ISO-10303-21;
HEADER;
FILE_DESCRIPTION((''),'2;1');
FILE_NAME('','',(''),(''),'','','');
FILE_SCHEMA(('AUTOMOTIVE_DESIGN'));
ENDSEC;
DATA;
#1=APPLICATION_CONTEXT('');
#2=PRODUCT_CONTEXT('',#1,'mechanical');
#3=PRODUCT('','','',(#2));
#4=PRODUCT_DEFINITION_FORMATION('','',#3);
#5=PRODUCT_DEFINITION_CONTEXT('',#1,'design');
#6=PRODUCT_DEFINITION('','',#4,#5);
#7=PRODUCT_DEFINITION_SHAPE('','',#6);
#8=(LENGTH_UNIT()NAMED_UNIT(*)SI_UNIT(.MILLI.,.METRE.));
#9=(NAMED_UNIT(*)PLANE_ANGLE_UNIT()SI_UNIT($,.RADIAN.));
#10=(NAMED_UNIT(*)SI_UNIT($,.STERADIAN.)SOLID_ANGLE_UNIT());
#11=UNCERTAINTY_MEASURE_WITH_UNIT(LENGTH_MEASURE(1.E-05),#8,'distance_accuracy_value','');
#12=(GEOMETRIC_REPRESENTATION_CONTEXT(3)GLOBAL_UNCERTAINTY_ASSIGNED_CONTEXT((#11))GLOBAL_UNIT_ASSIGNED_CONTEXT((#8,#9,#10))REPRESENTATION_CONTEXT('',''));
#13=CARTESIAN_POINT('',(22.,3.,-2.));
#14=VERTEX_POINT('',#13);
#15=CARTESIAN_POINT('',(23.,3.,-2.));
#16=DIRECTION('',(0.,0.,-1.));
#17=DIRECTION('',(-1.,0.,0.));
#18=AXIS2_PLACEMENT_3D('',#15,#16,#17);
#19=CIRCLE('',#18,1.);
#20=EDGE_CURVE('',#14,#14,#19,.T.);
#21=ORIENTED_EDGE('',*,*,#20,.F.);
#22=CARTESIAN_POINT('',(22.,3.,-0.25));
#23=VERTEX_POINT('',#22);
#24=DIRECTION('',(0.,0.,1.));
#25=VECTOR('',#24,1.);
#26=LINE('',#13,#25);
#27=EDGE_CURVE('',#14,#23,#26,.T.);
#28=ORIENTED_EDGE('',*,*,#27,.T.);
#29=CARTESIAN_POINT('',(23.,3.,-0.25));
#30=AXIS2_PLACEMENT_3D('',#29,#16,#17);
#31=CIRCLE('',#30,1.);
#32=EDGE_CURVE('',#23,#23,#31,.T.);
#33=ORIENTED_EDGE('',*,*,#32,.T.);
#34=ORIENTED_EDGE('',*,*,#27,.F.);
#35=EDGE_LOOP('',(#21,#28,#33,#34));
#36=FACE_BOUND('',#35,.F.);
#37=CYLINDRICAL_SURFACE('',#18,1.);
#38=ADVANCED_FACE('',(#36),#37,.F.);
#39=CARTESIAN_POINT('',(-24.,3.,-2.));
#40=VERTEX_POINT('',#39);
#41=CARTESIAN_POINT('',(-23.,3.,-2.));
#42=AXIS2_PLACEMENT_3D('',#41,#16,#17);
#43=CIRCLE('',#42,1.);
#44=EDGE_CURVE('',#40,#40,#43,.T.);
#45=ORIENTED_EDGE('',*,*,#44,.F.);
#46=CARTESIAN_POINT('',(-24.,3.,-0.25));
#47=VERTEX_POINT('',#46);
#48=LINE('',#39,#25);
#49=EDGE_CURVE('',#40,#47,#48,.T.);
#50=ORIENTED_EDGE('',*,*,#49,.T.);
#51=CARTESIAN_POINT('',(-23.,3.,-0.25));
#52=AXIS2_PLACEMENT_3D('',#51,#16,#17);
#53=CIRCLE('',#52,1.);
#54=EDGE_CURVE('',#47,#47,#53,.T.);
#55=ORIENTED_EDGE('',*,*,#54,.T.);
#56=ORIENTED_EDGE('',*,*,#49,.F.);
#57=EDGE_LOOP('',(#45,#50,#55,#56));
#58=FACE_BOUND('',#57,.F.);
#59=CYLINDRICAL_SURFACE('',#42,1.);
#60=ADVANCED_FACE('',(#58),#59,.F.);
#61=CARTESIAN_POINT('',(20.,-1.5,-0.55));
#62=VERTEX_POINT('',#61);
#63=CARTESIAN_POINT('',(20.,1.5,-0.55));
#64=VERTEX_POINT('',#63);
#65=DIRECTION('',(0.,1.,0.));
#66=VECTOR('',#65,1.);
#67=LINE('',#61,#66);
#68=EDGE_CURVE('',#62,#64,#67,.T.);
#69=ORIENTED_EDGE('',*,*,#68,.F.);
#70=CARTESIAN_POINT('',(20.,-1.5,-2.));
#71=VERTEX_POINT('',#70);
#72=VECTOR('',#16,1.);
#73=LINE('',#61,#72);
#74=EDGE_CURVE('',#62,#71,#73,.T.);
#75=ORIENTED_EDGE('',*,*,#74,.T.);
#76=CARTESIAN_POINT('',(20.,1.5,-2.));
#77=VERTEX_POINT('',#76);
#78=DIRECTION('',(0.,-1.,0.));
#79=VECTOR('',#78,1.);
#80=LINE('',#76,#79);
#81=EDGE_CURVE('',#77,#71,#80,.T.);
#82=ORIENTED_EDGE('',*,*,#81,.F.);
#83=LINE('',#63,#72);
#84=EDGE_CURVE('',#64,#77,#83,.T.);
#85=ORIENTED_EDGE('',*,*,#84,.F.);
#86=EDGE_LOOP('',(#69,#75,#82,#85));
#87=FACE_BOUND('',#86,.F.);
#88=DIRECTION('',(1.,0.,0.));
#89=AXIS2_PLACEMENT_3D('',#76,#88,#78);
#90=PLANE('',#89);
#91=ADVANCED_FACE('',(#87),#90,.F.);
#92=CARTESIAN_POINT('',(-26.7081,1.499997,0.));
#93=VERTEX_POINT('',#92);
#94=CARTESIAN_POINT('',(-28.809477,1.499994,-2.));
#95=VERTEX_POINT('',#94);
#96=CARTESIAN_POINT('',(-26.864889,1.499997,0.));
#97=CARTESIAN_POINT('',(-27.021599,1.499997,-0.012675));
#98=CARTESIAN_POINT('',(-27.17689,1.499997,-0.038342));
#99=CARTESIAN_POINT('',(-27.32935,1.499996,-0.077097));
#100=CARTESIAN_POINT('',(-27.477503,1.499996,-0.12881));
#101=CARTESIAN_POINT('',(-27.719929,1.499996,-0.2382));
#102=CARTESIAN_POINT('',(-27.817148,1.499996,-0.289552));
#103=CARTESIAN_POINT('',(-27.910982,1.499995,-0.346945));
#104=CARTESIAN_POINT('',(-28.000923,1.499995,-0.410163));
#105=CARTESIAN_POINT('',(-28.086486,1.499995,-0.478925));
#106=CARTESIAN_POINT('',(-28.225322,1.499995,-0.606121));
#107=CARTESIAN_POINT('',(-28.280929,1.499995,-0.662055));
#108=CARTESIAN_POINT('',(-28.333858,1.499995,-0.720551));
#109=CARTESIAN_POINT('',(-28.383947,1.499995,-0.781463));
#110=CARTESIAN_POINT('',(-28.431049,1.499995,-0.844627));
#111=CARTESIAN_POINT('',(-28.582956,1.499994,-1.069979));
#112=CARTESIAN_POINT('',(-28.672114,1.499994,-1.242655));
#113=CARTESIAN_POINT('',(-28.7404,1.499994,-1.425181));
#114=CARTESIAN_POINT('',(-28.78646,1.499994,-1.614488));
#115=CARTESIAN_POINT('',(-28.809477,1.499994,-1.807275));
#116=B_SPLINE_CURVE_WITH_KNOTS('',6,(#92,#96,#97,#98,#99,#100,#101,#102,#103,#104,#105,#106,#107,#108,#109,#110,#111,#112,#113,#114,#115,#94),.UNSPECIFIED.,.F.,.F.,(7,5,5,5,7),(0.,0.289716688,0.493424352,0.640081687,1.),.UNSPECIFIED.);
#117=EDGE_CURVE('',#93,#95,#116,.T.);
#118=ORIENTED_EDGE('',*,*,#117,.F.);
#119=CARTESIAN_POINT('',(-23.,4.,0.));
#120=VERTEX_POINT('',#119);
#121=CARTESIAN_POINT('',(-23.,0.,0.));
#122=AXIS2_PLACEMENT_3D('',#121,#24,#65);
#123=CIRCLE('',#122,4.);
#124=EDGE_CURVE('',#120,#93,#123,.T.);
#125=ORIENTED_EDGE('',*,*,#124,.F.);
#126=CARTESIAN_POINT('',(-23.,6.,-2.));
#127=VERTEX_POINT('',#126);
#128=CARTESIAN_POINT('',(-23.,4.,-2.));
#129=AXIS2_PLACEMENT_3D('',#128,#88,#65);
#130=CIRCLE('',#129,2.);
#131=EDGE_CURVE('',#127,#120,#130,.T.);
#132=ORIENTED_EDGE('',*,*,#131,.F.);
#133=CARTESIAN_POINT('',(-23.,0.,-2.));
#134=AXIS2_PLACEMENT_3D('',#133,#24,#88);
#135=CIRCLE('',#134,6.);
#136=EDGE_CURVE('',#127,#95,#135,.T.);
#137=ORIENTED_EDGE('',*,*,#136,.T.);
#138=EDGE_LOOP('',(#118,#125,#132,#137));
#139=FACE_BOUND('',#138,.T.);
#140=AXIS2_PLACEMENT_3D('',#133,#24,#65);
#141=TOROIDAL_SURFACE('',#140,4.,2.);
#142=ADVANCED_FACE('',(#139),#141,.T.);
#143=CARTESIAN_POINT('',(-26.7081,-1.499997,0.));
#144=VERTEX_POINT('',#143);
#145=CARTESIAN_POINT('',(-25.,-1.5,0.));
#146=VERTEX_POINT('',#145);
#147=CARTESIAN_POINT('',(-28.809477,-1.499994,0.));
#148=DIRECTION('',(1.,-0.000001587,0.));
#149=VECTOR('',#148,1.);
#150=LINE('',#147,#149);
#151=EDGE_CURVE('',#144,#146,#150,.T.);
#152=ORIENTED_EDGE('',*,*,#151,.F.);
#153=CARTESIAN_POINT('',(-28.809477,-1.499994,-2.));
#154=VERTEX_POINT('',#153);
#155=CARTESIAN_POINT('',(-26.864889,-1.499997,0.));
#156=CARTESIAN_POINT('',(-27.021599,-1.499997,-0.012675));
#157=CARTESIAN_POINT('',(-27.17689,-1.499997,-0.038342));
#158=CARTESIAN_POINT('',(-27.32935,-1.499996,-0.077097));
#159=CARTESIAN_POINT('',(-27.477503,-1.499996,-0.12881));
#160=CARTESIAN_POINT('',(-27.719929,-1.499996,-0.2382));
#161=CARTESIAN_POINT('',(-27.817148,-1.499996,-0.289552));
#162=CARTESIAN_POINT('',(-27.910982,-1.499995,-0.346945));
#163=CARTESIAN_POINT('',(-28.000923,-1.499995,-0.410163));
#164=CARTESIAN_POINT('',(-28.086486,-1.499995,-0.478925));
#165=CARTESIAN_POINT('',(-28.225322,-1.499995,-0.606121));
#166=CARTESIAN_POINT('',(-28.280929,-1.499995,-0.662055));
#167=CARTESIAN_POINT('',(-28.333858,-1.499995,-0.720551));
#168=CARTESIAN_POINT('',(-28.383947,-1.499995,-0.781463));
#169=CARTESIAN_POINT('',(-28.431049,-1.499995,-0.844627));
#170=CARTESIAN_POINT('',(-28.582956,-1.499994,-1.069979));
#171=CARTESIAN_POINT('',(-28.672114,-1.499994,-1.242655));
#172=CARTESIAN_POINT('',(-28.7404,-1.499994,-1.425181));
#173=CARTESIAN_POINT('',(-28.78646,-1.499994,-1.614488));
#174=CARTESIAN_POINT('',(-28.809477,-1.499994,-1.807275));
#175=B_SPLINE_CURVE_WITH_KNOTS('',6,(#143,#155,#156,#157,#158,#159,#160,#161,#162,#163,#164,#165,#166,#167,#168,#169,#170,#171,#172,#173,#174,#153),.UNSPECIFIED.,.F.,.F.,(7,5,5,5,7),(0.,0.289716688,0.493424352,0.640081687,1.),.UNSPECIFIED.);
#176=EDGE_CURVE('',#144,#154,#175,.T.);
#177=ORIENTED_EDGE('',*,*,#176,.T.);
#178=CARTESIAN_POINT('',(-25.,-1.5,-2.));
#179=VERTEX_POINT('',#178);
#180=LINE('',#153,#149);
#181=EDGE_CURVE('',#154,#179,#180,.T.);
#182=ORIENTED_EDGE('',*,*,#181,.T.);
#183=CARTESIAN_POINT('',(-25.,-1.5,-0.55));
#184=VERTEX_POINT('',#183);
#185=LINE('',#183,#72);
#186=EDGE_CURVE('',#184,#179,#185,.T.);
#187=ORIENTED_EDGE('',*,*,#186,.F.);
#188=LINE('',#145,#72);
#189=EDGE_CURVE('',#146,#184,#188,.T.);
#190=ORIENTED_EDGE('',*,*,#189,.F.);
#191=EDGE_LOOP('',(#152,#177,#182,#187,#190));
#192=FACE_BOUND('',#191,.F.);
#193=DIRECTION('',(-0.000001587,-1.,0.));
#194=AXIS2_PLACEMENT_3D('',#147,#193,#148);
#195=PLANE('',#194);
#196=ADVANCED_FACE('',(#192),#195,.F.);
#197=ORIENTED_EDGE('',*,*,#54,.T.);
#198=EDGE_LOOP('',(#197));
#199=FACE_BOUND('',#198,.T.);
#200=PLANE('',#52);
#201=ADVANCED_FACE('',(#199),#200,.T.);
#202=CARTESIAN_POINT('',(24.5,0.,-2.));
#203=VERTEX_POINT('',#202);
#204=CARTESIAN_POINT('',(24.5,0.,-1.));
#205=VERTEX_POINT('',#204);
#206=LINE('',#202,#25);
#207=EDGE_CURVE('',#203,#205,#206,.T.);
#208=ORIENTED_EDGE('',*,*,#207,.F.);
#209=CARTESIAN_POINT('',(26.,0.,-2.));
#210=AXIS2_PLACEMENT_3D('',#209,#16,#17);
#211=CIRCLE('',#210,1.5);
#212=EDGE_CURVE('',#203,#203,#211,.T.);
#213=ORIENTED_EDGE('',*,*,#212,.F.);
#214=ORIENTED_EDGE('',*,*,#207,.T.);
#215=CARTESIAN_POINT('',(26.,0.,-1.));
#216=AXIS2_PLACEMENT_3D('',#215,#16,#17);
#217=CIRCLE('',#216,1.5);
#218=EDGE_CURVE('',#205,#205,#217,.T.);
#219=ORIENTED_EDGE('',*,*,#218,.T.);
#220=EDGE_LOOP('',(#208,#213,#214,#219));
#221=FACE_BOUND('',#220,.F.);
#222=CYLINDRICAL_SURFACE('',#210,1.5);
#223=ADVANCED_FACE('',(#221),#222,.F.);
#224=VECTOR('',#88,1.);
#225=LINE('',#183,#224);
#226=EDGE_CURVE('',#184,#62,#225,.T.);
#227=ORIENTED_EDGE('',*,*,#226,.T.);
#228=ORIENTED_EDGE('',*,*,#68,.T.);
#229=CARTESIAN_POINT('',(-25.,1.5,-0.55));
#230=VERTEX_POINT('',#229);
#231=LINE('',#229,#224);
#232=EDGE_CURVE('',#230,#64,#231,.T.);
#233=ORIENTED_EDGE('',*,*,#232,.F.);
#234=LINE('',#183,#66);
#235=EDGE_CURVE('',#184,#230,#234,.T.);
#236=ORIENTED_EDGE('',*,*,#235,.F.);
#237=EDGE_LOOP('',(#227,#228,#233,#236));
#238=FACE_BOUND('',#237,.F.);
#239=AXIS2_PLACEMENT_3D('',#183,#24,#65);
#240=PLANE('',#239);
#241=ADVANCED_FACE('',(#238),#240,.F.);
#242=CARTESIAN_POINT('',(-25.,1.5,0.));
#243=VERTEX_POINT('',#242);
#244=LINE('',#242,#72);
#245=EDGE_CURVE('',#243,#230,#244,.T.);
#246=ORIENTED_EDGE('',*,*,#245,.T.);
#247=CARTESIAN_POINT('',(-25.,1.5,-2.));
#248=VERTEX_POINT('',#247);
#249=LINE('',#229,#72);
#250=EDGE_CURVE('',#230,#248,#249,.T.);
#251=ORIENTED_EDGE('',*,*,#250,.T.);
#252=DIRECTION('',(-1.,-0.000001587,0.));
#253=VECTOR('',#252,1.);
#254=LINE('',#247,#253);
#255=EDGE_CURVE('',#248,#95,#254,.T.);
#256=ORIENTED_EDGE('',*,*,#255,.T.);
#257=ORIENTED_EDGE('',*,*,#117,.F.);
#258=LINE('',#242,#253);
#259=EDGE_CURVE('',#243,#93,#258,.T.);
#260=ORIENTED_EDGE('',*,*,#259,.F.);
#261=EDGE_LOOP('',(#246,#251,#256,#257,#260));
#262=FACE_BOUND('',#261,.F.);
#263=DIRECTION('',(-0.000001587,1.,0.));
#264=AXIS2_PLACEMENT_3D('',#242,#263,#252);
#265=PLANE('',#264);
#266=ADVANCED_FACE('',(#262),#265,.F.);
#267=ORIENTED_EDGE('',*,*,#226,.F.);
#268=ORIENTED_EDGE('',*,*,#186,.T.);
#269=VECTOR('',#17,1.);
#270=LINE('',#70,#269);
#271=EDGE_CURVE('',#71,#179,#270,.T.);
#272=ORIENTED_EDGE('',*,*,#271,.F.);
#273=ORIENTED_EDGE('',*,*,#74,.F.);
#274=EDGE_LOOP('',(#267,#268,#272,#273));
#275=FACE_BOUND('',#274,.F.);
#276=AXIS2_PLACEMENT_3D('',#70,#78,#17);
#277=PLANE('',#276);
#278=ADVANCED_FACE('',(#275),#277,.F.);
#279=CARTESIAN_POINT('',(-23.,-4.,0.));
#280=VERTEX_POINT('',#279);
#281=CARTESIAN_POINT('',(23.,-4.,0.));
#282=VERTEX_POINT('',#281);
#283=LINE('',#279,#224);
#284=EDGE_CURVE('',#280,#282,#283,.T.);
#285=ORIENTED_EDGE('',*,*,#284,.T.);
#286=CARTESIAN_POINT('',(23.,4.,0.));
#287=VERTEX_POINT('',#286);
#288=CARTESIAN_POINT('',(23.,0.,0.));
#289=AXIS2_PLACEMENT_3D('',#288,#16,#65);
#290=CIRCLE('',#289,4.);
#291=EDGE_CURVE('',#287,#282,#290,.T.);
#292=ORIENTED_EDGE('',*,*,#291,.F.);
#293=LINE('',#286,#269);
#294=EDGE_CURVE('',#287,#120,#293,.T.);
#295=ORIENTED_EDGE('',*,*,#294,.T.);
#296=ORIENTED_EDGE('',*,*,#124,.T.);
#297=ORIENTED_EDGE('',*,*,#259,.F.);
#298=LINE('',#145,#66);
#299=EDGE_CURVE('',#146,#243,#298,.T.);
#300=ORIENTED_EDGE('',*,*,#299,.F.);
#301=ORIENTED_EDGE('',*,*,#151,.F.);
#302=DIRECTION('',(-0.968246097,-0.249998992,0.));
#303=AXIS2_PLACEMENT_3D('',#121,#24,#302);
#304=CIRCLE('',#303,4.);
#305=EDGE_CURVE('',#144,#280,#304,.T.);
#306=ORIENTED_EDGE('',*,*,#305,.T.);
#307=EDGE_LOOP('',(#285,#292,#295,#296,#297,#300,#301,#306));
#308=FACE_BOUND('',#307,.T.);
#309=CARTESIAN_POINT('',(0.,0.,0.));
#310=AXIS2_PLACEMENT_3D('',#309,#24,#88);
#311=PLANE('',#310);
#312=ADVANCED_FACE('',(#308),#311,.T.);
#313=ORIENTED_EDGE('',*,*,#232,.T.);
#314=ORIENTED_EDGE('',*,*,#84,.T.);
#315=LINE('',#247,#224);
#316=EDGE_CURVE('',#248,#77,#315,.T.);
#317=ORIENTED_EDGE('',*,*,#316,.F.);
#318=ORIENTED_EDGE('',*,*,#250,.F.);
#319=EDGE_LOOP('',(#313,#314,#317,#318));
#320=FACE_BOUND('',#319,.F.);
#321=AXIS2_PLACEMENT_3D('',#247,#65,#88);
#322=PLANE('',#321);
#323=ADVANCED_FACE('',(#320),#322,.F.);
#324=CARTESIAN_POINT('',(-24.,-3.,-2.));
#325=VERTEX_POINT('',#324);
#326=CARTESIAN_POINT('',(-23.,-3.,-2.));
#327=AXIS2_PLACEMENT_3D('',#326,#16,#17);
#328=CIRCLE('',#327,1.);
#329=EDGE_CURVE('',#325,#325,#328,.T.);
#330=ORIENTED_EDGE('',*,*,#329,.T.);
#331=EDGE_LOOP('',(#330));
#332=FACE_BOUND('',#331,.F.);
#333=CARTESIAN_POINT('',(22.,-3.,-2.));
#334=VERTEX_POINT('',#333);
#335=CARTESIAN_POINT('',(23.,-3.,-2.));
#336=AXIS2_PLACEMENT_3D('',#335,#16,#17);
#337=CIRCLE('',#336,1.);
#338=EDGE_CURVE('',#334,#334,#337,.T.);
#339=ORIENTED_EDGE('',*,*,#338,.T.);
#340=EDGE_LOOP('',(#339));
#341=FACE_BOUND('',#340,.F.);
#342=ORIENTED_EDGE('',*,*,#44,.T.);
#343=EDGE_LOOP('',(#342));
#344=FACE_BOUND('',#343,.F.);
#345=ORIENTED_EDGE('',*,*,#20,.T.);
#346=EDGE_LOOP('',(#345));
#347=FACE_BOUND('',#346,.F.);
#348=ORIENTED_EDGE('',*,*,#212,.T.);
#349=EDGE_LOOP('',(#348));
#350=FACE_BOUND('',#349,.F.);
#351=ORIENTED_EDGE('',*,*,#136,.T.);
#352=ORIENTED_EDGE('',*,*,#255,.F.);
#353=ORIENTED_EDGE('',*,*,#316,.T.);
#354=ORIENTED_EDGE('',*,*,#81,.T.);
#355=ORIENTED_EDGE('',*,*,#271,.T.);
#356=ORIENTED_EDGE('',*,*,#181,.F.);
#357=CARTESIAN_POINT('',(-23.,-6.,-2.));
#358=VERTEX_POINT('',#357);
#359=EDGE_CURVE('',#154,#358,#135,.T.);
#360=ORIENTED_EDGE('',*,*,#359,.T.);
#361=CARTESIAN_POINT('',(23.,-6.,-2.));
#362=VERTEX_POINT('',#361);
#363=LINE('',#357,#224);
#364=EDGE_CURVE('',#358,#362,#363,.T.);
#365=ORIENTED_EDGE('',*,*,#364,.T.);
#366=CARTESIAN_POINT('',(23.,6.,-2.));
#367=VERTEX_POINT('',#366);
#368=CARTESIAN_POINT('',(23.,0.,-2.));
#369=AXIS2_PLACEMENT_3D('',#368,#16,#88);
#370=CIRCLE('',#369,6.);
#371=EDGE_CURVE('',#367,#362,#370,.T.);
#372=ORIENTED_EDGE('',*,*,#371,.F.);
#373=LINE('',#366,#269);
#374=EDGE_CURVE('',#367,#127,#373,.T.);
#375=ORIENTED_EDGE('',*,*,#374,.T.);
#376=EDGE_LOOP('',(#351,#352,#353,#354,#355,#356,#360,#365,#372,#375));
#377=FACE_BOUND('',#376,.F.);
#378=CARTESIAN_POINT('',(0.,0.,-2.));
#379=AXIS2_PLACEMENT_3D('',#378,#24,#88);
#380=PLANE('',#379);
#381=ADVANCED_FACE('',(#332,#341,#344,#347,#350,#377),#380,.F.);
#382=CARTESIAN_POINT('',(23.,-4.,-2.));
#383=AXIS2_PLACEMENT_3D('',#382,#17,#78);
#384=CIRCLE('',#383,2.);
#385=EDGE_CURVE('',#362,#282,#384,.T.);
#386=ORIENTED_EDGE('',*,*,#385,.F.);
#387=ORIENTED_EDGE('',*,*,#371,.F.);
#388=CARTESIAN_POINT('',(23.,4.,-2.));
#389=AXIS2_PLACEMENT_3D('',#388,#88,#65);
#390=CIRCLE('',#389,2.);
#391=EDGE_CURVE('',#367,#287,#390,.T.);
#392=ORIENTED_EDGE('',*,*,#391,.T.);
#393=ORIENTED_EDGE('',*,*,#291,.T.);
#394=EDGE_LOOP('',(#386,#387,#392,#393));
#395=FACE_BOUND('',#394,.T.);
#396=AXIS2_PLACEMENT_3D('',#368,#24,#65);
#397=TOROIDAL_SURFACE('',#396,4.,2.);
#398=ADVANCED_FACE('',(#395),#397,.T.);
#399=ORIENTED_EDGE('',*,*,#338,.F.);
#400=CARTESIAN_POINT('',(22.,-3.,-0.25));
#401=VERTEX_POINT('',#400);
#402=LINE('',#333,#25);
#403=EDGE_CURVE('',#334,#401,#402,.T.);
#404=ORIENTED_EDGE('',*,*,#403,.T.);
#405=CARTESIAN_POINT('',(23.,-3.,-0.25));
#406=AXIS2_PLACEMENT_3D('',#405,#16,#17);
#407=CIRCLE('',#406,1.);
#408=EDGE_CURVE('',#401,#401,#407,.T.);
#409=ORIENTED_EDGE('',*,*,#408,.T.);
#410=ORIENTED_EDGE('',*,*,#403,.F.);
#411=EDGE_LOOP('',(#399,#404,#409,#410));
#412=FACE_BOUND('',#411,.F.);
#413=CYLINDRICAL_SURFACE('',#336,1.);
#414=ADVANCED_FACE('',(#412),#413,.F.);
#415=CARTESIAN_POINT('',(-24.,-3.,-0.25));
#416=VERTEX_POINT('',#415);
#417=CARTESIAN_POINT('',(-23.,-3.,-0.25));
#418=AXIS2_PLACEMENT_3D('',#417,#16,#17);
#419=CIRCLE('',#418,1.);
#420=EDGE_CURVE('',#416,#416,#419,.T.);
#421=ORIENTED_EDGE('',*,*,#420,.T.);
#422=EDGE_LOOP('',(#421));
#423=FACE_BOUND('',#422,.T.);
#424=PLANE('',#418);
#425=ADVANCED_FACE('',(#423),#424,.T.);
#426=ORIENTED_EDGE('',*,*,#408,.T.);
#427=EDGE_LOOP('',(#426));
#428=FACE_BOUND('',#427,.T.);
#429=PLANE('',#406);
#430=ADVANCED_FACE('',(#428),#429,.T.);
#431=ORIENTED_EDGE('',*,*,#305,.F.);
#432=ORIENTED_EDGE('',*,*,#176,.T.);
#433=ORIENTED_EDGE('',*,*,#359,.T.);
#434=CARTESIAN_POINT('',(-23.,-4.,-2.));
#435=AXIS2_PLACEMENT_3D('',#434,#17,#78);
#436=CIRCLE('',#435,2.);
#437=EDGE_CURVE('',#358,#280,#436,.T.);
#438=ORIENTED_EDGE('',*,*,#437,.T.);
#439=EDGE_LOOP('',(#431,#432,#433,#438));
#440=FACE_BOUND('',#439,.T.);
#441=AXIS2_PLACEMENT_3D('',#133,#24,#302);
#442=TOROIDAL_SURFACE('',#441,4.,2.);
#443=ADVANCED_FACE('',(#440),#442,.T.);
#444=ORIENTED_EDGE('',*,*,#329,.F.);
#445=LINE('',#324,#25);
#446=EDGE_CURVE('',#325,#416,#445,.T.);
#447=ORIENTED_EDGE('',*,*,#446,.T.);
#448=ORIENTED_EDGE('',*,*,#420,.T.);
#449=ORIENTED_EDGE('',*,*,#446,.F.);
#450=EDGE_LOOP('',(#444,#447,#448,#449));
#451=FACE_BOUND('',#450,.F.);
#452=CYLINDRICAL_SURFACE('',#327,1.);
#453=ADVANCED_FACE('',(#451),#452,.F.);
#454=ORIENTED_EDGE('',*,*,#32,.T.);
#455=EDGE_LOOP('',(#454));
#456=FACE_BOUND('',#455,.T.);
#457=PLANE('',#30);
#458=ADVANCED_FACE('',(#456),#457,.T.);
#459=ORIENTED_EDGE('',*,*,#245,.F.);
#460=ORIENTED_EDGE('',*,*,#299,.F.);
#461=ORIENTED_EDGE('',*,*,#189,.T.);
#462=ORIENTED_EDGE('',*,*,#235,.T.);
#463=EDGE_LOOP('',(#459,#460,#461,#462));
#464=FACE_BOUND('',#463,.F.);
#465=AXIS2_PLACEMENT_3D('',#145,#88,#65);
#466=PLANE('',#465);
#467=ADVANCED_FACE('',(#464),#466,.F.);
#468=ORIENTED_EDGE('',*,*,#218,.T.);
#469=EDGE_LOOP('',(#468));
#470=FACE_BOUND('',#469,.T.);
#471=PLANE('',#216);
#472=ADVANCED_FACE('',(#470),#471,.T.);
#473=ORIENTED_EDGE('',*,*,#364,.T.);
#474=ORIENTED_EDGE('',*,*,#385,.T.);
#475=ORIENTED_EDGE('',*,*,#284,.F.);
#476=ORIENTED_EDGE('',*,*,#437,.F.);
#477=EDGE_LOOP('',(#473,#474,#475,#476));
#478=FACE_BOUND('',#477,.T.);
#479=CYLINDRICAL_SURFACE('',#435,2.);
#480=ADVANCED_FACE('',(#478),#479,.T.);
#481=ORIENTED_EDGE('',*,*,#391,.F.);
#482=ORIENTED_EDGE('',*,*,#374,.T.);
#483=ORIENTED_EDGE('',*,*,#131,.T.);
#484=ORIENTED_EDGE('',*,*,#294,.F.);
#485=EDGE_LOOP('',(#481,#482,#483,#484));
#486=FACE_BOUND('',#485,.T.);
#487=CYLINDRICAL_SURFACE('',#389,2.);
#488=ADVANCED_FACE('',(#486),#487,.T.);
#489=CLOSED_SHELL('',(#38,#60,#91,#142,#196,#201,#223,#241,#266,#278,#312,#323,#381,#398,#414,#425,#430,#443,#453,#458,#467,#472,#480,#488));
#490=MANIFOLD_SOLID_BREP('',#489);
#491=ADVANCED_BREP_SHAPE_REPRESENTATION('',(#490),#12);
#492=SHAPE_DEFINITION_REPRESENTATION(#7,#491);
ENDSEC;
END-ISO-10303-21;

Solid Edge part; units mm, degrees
sketch "Sketch1" plane through (0, 0, 0) normal (0, 0, 1) x (1, 0, 0)
  line L0 (-23, -6) -> (23, -6)
  arc A0 (23, 6) -> (23, -6) centre (23, 0) cw
  line L1 (23, 6) -> (-23, 6)
  arc A1 (-23, 6) -> (-23, -6) centre (-23, 0) ccw
  arc A2 (-28.8095, 1.5) -> (-28.8095, -1.5) centre (-23, 0) ccw
  line L2 (-28.8095, -1.5) -> (-25, -1.5)
  line L3 (-25, -1.5) -> (-25, 1.5)
  line L4 (-25, 1.5) -> (-28.8095, 1.5)
extrude "Protrusion1" add sketch "Sketch1" against normal blind 2
fillet "Round_1" radius 2 4 edges at (0, -6, 0) (29, 0, 0) (0, 6, 0) (-29, 0, 0)
sketch "Sketch2" plane through (0, 0, 0) normal (0, 0, 1) x (1, 0, 0)
  line L0 (-28.8095, -1.5) -> (-25, -1.5)
  line L1 (-25, -1.5) -> (-25, 1.5)
  line L2 (-25, 1.5) -> (-28.8095, 1.5)
  arc A0 (-28.8095, 1.5) -> (-28.8095, -1.5) centre (-23, 0) ccw
extrude "ExtrudedCutout_1" cut sketch "Sketch2" against normal blind 2
sketch "Sketch3" plane through (0.0953, 0, -2) normal (0, 0, -1) x (-1, 0, 0)
  line L0 (-19.9047, -1.5) -> (25.0953, -1.5)
  line L1 (25.0953, -1.5) -> (25.0953, 1.5)
  line L2 (25.0953, 1.5) -> (-19.9047, 1.5)
  line L3 (-19.9047, 1.5) -> (-19.9047, -1.5)
extrude "ExtrudedCutout_2" cut sketch "Sketch3" against normal blind 1.25
sketch "Sketch4" plane through (0.0953, 0, -2) normal (0, 0, -1) x (-1, 0, 0)
  circle A0 centre (23.0953, -3) radius 1
extrude "ExtrudedCutout_3" cut sketch "Sketch4" against normal blind 1.75
sketch "Sketch5" plane through (0.0953, 0, -2) normal (0, 0, -1) x (-1, 0, 0)
  circle A0 centre (23.0953, 3) radius 1
extrude "ExtrudedCutout_4" cut sketch "Sketch5" against normal blind 1.75
sketch "Sketch6" plane through (0.0953, 0, -2) normal (0, 0, -1) x (-1, 0, 0)
  circle A0 centre (-22.9047, -3) radius 1
extrude "ExtrudedCutout_6" cut sketch "Sketch6" against normal blind 1.75
sketch "Sketch7" plane through (0.0953, 0, -2) normal (0, 0, -1) x (-1, 0, 0)
  circle A0 centre (-22.9047, 3) radius 1
extrude "ExtrudedCutout_7" cut sketch "Sketch7" against normal blind 1.75
sketch "Sketch8" plane through (0.0953, 0, -2) normal (0, 0, -1) x (-1, 0, 0)
  circle A0 centre (-25.9047, 0) radius 1.5
extrude "ExtrudedCutout_8" cut sketch "Sketch8" against normal blind 1
sketch "Sketch9" plane through (-25, 0, -0.375) normal (-1, 0, 0) x (0, 0, 1)
  line L0 (-0.375, 1.5) -> (-0.375, -1.5)
  line L1 (-0.375, -1.5) -> (-0.175, -1.5)
  line L2 (-0.175, -1.5) -> (-0.175, 1.5)
  line L3 (-0.175, 1.5) -> (-0.375, 1.5)
extrude "ExtrudedCutout_9" cut sketch "Sketch9" against normal blind 45
